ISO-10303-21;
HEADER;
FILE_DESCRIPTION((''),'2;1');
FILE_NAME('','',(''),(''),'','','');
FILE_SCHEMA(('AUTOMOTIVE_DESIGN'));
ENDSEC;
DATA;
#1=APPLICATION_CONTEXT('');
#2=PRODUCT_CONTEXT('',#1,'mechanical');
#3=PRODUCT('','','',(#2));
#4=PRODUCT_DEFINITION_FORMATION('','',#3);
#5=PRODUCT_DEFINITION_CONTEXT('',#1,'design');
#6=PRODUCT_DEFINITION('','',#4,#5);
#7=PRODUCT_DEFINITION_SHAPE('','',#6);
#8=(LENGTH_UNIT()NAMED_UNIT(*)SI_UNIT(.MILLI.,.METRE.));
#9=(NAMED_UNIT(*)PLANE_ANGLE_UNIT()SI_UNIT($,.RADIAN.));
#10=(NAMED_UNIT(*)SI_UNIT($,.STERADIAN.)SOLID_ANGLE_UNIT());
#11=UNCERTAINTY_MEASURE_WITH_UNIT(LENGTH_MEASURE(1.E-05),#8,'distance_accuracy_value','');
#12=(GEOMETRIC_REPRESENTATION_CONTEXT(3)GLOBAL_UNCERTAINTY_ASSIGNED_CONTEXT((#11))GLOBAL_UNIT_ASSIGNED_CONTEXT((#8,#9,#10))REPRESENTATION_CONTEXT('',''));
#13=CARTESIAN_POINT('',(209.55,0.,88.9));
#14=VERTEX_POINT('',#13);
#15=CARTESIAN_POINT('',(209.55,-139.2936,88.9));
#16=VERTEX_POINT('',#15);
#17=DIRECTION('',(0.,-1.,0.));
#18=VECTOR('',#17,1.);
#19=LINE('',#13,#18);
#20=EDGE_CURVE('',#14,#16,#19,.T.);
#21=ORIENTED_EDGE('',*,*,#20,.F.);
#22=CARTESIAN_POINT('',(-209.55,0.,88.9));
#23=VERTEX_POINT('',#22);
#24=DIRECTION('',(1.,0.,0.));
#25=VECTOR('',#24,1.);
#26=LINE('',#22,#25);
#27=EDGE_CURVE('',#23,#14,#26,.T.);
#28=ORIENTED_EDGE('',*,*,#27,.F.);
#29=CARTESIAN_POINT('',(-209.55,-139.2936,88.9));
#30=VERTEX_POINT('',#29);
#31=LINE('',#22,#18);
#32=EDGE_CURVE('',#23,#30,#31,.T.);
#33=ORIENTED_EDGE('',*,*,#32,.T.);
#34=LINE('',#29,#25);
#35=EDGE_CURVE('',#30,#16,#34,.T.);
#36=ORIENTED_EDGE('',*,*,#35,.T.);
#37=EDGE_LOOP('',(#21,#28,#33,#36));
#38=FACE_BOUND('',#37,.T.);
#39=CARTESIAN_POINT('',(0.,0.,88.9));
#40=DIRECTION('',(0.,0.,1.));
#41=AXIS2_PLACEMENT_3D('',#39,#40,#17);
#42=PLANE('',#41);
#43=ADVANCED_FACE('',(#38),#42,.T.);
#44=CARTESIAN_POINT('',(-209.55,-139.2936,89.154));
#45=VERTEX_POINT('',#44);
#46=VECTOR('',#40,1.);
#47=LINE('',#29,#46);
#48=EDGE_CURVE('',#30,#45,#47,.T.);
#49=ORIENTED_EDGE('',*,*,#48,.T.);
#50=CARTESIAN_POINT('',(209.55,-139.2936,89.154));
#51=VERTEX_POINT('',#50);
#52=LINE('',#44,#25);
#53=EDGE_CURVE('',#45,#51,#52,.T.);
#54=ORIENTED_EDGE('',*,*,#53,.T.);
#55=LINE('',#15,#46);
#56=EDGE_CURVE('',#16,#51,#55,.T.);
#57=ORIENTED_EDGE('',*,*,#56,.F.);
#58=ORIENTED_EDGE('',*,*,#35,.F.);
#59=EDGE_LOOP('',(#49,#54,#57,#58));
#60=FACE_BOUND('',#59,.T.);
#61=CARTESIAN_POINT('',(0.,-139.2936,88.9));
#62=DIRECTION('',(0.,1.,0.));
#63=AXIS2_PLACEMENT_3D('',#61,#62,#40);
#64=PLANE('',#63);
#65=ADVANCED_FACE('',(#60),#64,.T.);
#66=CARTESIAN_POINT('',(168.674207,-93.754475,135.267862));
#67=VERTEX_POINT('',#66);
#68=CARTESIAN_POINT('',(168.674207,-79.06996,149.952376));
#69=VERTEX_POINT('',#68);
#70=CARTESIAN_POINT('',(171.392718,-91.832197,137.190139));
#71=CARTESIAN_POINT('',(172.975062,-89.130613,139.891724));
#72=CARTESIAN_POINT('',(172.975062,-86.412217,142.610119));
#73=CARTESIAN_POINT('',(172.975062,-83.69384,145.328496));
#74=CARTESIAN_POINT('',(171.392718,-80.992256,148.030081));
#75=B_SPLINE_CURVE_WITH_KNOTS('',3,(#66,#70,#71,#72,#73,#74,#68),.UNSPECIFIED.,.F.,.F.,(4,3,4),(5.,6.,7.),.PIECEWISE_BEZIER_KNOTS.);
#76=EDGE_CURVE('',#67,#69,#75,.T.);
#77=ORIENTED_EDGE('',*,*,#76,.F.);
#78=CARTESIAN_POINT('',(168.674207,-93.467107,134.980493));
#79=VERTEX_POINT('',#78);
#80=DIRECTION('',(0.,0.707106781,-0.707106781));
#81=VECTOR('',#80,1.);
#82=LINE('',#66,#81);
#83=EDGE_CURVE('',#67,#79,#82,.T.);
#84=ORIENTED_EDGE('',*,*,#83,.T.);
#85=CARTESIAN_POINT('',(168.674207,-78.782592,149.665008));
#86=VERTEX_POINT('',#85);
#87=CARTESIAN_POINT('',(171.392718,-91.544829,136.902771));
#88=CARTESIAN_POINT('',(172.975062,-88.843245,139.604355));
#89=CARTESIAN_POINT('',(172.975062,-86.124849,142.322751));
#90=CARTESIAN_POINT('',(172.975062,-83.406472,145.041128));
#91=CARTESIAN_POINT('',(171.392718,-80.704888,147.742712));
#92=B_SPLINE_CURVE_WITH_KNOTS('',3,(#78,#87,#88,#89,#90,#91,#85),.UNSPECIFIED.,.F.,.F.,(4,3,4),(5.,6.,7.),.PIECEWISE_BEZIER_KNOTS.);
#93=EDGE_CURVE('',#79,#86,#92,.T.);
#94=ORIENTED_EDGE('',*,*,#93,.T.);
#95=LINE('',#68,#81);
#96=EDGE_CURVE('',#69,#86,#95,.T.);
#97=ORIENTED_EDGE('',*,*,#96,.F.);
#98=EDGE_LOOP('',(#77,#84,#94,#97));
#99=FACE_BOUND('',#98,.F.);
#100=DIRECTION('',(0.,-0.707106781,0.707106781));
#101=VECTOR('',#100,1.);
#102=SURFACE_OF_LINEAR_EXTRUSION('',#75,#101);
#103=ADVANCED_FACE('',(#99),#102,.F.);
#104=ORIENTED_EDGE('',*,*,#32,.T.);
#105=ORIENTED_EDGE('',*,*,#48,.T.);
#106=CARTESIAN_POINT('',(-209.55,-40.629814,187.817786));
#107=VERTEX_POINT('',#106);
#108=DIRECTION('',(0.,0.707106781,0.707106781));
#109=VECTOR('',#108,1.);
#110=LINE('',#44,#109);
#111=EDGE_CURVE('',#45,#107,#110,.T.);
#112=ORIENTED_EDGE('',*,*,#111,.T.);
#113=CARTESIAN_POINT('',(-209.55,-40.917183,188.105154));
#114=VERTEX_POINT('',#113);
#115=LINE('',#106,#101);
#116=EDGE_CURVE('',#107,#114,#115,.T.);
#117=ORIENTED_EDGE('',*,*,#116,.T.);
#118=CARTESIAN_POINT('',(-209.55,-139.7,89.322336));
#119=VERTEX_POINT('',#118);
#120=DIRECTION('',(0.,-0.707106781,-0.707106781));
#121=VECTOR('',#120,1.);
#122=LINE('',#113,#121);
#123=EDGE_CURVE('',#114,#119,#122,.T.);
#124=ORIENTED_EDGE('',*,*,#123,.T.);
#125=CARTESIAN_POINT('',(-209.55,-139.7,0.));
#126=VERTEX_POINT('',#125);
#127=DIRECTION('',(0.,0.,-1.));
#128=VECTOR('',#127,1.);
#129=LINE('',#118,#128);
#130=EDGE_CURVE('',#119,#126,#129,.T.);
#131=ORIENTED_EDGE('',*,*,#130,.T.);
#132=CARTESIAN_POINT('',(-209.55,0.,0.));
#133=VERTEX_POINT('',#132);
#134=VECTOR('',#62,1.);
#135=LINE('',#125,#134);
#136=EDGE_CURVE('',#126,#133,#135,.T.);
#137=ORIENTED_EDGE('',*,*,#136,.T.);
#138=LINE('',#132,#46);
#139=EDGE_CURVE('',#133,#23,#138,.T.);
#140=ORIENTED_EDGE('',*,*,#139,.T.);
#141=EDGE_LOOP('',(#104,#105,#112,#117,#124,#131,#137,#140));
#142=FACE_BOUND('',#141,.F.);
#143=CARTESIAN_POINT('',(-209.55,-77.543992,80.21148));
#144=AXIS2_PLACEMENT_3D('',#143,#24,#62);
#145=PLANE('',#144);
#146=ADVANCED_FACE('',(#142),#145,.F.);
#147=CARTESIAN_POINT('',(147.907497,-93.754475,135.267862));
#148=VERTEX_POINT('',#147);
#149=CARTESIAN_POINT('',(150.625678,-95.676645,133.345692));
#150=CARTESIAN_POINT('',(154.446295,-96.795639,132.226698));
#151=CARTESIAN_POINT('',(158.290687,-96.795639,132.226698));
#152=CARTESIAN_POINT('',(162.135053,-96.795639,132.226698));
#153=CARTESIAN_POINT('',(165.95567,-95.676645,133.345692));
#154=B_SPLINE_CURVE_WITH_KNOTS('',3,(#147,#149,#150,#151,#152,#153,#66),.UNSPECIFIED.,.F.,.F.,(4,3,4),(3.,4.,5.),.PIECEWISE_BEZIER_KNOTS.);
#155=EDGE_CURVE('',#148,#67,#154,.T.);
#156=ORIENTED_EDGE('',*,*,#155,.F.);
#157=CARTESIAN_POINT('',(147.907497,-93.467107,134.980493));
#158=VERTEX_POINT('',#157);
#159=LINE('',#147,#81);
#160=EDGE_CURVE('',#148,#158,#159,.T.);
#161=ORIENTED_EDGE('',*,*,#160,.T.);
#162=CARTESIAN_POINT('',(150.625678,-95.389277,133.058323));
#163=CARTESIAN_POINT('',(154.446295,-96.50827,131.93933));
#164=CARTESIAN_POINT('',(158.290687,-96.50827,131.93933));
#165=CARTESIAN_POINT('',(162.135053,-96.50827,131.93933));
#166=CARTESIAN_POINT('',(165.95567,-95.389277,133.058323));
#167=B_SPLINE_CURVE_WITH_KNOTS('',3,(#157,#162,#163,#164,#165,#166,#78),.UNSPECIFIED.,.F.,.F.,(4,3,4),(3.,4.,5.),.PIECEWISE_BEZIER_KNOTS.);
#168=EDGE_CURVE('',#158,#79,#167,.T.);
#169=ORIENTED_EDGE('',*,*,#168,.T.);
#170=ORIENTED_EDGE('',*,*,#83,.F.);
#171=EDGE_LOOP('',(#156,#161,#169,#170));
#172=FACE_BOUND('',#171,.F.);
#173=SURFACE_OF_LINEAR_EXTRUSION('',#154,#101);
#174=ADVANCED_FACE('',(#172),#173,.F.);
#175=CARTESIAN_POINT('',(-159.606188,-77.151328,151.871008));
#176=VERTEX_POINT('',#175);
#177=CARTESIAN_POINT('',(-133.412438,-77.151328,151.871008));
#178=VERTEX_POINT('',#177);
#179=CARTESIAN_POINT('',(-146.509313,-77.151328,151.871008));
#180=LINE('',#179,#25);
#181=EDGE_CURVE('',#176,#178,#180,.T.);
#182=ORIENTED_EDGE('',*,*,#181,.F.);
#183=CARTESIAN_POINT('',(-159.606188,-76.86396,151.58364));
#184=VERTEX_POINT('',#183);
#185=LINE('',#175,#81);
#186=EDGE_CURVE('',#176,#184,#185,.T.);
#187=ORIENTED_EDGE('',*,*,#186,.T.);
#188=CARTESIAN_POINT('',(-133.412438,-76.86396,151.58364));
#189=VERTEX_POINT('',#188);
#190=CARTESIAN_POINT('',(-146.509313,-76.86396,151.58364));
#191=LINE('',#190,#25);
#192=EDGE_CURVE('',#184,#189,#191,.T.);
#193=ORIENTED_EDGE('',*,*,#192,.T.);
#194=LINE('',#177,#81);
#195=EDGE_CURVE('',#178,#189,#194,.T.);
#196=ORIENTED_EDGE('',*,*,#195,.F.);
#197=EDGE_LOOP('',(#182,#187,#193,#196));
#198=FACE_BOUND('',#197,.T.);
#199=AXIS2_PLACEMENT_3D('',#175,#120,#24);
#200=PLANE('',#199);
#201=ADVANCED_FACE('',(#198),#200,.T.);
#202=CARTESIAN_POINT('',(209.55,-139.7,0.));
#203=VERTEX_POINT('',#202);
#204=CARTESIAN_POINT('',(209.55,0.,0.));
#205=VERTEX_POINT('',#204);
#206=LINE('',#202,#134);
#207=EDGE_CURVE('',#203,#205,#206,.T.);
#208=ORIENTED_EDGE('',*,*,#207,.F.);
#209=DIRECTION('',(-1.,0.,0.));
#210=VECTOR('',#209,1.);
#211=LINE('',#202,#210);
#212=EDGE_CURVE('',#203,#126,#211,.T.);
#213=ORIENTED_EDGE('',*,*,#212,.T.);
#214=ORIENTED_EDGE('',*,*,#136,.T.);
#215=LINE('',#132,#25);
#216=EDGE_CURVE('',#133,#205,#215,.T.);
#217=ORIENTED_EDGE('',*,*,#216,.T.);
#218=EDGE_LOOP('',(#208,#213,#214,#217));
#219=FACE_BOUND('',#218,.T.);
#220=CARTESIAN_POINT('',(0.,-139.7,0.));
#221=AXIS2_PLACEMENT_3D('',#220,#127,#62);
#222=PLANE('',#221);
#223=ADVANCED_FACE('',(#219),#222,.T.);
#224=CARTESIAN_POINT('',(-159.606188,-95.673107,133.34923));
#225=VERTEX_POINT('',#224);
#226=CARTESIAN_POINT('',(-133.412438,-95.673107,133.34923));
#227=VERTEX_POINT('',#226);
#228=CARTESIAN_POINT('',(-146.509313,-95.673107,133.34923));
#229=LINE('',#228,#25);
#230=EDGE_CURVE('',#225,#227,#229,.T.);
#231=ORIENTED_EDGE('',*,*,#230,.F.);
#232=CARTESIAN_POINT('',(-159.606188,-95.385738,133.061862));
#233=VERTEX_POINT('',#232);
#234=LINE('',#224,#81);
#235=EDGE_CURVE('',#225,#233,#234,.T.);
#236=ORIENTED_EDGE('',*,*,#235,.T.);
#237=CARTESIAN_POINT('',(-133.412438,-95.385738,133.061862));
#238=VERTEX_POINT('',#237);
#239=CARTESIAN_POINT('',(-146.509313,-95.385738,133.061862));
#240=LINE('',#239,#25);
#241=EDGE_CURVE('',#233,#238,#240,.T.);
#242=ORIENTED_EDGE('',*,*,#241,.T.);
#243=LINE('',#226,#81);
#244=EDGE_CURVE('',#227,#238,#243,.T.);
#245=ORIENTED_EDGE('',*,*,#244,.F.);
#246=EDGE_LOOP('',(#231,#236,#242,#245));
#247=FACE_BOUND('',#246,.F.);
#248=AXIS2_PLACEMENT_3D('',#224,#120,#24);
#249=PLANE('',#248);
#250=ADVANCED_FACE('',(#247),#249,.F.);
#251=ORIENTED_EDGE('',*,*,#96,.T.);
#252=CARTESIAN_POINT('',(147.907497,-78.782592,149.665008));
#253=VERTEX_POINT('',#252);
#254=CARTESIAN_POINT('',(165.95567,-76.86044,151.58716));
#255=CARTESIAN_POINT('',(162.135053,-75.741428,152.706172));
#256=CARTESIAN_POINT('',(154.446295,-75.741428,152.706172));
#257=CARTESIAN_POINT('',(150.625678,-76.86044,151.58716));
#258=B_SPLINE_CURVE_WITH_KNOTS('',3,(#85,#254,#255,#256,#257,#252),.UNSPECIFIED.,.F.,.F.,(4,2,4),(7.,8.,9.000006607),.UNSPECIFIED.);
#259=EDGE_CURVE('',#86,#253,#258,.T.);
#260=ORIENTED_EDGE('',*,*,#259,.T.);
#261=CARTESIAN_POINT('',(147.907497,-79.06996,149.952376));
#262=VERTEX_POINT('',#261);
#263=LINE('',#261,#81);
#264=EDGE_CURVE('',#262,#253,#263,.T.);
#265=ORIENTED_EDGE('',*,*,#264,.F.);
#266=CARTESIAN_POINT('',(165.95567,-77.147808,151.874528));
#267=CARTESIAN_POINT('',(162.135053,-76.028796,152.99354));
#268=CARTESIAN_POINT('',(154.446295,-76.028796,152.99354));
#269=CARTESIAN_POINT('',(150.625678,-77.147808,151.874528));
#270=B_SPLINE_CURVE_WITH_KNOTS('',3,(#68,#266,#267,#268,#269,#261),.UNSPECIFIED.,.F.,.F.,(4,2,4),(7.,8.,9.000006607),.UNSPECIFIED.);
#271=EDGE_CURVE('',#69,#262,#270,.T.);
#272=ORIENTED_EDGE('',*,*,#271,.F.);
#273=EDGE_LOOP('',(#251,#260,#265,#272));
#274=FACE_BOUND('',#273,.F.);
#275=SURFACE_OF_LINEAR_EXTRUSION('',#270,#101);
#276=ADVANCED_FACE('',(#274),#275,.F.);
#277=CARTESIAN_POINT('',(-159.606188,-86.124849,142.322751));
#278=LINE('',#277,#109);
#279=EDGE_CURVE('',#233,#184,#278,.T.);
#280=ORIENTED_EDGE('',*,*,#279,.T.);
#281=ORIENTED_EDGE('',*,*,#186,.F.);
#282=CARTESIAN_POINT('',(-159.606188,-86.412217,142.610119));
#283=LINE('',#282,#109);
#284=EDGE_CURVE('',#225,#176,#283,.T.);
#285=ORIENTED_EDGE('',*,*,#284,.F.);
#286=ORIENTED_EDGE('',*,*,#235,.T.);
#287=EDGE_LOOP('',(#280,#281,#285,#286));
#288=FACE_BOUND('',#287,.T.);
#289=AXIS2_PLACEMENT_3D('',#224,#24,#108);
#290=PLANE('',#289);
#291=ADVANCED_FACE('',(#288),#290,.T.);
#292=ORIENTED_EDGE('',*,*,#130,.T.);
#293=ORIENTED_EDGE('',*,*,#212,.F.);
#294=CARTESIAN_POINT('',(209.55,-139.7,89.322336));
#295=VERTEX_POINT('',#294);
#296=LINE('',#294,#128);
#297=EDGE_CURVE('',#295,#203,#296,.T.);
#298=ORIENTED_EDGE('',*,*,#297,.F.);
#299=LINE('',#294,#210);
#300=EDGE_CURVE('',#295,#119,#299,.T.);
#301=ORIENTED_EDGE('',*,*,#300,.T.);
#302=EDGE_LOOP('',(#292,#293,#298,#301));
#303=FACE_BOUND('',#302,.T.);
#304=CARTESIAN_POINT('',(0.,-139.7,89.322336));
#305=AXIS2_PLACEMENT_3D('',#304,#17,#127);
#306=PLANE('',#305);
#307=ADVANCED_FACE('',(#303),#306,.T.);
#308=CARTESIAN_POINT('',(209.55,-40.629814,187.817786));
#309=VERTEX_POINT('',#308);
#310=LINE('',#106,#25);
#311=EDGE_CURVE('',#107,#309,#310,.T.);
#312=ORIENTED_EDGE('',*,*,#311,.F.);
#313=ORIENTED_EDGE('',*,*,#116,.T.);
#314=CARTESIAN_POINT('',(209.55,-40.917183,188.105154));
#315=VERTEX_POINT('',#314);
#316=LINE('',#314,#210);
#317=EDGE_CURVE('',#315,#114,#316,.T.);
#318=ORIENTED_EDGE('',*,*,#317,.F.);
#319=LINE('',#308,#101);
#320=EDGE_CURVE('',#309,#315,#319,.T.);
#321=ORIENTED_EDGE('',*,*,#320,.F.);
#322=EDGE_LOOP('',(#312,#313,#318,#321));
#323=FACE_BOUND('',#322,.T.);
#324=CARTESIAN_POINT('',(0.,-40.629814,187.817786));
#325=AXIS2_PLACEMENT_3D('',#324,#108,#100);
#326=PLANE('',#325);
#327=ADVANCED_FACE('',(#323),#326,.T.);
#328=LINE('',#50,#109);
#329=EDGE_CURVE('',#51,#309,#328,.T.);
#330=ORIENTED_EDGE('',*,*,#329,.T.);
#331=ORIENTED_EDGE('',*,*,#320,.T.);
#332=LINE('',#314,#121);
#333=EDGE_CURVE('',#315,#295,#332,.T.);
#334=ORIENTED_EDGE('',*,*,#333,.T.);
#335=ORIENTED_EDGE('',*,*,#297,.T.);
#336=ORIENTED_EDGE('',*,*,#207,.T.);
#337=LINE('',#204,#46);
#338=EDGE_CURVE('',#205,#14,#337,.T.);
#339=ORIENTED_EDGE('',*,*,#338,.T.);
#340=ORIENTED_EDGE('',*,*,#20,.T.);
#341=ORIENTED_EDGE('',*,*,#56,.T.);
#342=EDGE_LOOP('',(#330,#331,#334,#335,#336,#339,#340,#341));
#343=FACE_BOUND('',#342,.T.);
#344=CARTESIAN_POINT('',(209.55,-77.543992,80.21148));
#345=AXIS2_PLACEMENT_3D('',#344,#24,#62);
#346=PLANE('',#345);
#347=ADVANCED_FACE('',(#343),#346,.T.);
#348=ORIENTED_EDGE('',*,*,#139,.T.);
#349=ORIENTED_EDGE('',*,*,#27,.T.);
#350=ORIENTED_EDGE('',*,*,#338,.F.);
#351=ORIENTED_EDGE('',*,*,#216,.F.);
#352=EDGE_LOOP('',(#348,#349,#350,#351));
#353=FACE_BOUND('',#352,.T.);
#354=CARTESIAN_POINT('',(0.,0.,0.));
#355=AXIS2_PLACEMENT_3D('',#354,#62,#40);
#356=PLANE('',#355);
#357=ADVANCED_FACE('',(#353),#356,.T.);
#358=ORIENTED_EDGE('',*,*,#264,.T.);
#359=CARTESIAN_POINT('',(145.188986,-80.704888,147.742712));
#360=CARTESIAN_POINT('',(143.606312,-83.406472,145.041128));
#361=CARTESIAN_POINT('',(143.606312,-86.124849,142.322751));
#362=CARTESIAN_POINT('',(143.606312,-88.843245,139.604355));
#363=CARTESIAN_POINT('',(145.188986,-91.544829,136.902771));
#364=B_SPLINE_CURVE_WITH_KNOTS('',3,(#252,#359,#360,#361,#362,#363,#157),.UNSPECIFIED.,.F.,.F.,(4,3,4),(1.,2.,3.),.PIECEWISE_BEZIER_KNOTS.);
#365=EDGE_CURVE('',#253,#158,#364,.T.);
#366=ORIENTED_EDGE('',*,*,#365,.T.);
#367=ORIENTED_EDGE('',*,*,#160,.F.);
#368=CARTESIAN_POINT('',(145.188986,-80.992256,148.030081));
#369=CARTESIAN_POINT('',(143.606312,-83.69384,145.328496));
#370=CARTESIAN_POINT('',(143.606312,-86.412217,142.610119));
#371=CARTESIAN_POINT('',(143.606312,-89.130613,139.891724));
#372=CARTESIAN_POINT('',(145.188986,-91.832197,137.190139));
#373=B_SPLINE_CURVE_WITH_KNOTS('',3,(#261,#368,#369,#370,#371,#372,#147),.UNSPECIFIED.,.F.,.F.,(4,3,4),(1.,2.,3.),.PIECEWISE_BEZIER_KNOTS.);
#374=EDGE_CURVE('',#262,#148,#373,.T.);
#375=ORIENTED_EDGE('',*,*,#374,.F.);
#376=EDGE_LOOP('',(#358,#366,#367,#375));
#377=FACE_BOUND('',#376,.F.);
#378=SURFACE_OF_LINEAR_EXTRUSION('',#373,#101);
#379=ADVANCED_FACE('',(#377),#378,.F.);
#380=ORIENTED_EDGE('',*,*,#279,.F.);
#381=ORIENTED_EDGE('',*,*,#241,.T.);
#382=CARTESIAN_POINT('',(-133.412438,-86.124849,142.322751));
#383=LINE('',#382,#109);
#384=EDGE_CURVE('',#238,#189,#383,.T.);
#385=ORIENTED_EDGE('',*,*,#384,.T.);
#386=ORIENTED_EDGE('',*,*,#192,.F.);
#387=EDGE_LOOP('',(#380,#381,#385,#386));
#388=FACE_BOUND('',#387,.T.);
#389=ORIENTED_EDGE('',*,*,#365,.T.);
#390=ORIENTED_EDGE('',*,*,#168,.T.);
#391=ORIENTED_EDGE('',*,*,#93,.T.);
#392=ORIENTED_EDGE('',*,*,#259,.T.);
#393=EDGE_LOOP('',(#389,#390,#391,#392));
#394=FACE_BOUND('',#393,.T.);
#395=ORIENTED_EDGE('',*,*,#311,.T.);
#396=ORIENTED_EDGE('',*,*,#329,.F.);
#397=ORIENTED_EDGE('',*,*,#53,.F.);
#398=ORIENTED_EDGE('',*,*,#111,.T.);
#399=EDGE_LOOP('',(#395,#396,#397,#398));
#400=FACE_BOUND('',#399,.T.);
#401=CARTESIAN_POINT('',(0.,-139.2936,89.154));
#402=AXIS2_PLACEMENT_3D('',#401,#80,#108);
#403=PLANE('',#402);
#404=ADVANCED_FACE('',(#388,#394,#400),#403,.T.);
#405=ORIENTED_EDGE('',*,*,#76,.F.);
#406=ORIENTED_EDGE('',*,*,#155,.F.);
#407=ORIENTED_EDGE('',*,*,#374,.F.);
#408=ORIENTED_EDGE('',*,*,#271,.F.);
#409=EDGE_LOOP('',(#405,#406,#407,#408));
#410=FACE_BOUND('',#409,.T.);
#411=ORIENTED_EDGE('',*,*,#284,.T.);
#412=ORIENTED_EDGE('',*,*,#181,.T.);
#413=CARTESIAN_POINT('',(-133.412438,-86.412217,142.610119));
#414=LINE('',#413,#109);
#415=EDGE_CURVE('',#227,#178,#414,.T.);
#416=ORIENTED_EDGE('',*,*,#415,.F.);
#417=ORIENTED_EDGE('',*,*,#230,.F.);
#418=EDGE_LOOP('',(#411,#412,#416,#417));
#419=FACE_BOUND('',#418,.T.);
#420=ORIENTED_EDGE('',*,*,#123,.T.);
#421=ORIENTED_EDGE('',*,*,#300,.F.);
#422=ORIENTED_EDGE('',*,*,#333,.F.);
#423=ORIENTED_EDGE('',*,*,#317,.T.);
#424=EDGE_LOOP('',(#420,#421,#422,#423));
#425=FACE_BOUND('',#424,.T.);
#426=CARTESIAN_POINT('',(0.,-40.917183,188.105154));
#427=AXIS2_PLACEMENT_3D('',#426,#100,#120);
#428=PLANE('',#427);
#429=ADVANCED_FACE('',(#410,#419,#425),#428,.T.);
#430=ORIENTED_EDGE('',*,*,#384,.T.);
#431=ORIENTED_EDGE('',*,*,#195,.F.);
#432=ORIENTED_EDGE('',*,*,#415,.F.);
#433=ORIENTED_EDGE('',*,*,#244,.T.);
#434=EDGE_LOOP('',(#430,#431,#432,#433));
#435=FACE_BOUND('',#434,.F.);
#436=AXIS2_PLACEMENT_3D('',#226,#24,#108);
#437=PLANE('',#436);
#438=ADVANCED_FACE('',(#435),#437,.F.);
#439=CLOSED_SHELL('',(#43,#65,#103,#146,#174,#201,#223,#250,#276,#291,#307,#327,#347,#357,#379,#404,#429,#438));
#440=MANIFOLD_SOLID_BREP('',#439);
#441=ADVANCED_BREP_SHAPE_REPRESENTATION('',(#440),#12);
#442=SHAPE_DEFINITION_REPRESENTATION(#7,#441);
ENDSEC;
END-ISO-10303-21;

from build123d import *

# Parameters (mm, degrees)
F1_DEPTH = 209.55
F2_W     = 26.19375
F2_H     = 26.19375
F3_DEPTH = 0.4064


# Not quite as in the source:
# - the dataset's text gives a spline's control points without its knots; the knots are read off the source's solid


with BuildPart() as f1:
    # F0 (on Right) → F1 (new body, symmetric)
    with BuildSketch(Plane.YZ):
        Polygon((-139.7, 0), (0, 0), (0, 88.9), (-139.2936, 88.9), (-139.2936, 89.154), (-40.6298144724, 187.8177855276), (-40.9171826682, 188.1051537235), (-139.7, 89.3223363917), align=None)
    extrude(amount=F1_DEPTH, both=True)

    # F2 (on face) → F3 (cut, through all)
    with BuildSketch(Plane(origin=(0, -114.5111681959, 114.5111681959), x_dir=(1, 0, 0), z_dir=(0, -0.7071067812, 0.7071067812))):
        with Locations((-146.5093133926, 39.7379171954)):
            Rectangle(F2_W, F2_H)
        with BuildLine():
            add(Edge.make_bspline(
                [(168.6742066074, 50.1214371954), (165.9556700074, 52.8397705954), (162.1350528074, 54.4222921954), (158.2906866074, 54.4222921954)],
                knots=[7, 7, 7, 7, 8, 8, 8, 8], degree=3))
            add(Edge.make_bspline(
                [(158.2906866074, 54.4222921954), (154.4462950074, 54.4222921954), (150.6256778074, 52.8397705954), (147.9074968074, 50.1214371954)],
                knots=[0, 0, 0, 0, 1, 1, 1, 1], degree=3))
            add(Edge.make_bspline(
                [(147.9074968074, 50.1214371954), (145.1889856074, 47.4029005954), (143.6063116074, 43.5822833954), (143.6063116074, 39.7379171954), (143.6063116074, 35.8935255954), (145.1889856074, 32.0729083954), (147.9074968074, 29.3543971954)],
                knots=[1, 1, 1, 1, 2, 2, 2, 3, 3, 3, 3], degree=3))
            add(Edge.make_bspline(
                [(147.9074968074, 29.3543971954), (150.6256778074, 26.6360383954), (154.4462950074, 25.0535421954), (158.2906866074, 25.0535421954), (162.1350528074, 25.0535421954), (165.9556700074, 26.6360383954), (168.6742066074, 29.3543971954)],
                knots=[3, 3, 3, 3, 4, 4, 4, 5, 5, 5, 5], degree=3))
            add(Edge.make_bspline(
                [(168.6742066074, 29.3543971954), (171.3927178074, 32.0729083954), (172.9750616074, 35.8935255954), (172.9750616074, 39.7379171954), (172.9750616074, 43.5822833954), (171.3927178074, 47.4029005954), (168.6742066074, 50.1214371954)],
                knots=[5, 5, 5, 5, 6, 6, 6, 7, 7, 7, 7], degree=3))
        make_face()
    extrude(amount=-F3_DEPTH, mode=Mode.SUBTRACT)


solid = f1.part
